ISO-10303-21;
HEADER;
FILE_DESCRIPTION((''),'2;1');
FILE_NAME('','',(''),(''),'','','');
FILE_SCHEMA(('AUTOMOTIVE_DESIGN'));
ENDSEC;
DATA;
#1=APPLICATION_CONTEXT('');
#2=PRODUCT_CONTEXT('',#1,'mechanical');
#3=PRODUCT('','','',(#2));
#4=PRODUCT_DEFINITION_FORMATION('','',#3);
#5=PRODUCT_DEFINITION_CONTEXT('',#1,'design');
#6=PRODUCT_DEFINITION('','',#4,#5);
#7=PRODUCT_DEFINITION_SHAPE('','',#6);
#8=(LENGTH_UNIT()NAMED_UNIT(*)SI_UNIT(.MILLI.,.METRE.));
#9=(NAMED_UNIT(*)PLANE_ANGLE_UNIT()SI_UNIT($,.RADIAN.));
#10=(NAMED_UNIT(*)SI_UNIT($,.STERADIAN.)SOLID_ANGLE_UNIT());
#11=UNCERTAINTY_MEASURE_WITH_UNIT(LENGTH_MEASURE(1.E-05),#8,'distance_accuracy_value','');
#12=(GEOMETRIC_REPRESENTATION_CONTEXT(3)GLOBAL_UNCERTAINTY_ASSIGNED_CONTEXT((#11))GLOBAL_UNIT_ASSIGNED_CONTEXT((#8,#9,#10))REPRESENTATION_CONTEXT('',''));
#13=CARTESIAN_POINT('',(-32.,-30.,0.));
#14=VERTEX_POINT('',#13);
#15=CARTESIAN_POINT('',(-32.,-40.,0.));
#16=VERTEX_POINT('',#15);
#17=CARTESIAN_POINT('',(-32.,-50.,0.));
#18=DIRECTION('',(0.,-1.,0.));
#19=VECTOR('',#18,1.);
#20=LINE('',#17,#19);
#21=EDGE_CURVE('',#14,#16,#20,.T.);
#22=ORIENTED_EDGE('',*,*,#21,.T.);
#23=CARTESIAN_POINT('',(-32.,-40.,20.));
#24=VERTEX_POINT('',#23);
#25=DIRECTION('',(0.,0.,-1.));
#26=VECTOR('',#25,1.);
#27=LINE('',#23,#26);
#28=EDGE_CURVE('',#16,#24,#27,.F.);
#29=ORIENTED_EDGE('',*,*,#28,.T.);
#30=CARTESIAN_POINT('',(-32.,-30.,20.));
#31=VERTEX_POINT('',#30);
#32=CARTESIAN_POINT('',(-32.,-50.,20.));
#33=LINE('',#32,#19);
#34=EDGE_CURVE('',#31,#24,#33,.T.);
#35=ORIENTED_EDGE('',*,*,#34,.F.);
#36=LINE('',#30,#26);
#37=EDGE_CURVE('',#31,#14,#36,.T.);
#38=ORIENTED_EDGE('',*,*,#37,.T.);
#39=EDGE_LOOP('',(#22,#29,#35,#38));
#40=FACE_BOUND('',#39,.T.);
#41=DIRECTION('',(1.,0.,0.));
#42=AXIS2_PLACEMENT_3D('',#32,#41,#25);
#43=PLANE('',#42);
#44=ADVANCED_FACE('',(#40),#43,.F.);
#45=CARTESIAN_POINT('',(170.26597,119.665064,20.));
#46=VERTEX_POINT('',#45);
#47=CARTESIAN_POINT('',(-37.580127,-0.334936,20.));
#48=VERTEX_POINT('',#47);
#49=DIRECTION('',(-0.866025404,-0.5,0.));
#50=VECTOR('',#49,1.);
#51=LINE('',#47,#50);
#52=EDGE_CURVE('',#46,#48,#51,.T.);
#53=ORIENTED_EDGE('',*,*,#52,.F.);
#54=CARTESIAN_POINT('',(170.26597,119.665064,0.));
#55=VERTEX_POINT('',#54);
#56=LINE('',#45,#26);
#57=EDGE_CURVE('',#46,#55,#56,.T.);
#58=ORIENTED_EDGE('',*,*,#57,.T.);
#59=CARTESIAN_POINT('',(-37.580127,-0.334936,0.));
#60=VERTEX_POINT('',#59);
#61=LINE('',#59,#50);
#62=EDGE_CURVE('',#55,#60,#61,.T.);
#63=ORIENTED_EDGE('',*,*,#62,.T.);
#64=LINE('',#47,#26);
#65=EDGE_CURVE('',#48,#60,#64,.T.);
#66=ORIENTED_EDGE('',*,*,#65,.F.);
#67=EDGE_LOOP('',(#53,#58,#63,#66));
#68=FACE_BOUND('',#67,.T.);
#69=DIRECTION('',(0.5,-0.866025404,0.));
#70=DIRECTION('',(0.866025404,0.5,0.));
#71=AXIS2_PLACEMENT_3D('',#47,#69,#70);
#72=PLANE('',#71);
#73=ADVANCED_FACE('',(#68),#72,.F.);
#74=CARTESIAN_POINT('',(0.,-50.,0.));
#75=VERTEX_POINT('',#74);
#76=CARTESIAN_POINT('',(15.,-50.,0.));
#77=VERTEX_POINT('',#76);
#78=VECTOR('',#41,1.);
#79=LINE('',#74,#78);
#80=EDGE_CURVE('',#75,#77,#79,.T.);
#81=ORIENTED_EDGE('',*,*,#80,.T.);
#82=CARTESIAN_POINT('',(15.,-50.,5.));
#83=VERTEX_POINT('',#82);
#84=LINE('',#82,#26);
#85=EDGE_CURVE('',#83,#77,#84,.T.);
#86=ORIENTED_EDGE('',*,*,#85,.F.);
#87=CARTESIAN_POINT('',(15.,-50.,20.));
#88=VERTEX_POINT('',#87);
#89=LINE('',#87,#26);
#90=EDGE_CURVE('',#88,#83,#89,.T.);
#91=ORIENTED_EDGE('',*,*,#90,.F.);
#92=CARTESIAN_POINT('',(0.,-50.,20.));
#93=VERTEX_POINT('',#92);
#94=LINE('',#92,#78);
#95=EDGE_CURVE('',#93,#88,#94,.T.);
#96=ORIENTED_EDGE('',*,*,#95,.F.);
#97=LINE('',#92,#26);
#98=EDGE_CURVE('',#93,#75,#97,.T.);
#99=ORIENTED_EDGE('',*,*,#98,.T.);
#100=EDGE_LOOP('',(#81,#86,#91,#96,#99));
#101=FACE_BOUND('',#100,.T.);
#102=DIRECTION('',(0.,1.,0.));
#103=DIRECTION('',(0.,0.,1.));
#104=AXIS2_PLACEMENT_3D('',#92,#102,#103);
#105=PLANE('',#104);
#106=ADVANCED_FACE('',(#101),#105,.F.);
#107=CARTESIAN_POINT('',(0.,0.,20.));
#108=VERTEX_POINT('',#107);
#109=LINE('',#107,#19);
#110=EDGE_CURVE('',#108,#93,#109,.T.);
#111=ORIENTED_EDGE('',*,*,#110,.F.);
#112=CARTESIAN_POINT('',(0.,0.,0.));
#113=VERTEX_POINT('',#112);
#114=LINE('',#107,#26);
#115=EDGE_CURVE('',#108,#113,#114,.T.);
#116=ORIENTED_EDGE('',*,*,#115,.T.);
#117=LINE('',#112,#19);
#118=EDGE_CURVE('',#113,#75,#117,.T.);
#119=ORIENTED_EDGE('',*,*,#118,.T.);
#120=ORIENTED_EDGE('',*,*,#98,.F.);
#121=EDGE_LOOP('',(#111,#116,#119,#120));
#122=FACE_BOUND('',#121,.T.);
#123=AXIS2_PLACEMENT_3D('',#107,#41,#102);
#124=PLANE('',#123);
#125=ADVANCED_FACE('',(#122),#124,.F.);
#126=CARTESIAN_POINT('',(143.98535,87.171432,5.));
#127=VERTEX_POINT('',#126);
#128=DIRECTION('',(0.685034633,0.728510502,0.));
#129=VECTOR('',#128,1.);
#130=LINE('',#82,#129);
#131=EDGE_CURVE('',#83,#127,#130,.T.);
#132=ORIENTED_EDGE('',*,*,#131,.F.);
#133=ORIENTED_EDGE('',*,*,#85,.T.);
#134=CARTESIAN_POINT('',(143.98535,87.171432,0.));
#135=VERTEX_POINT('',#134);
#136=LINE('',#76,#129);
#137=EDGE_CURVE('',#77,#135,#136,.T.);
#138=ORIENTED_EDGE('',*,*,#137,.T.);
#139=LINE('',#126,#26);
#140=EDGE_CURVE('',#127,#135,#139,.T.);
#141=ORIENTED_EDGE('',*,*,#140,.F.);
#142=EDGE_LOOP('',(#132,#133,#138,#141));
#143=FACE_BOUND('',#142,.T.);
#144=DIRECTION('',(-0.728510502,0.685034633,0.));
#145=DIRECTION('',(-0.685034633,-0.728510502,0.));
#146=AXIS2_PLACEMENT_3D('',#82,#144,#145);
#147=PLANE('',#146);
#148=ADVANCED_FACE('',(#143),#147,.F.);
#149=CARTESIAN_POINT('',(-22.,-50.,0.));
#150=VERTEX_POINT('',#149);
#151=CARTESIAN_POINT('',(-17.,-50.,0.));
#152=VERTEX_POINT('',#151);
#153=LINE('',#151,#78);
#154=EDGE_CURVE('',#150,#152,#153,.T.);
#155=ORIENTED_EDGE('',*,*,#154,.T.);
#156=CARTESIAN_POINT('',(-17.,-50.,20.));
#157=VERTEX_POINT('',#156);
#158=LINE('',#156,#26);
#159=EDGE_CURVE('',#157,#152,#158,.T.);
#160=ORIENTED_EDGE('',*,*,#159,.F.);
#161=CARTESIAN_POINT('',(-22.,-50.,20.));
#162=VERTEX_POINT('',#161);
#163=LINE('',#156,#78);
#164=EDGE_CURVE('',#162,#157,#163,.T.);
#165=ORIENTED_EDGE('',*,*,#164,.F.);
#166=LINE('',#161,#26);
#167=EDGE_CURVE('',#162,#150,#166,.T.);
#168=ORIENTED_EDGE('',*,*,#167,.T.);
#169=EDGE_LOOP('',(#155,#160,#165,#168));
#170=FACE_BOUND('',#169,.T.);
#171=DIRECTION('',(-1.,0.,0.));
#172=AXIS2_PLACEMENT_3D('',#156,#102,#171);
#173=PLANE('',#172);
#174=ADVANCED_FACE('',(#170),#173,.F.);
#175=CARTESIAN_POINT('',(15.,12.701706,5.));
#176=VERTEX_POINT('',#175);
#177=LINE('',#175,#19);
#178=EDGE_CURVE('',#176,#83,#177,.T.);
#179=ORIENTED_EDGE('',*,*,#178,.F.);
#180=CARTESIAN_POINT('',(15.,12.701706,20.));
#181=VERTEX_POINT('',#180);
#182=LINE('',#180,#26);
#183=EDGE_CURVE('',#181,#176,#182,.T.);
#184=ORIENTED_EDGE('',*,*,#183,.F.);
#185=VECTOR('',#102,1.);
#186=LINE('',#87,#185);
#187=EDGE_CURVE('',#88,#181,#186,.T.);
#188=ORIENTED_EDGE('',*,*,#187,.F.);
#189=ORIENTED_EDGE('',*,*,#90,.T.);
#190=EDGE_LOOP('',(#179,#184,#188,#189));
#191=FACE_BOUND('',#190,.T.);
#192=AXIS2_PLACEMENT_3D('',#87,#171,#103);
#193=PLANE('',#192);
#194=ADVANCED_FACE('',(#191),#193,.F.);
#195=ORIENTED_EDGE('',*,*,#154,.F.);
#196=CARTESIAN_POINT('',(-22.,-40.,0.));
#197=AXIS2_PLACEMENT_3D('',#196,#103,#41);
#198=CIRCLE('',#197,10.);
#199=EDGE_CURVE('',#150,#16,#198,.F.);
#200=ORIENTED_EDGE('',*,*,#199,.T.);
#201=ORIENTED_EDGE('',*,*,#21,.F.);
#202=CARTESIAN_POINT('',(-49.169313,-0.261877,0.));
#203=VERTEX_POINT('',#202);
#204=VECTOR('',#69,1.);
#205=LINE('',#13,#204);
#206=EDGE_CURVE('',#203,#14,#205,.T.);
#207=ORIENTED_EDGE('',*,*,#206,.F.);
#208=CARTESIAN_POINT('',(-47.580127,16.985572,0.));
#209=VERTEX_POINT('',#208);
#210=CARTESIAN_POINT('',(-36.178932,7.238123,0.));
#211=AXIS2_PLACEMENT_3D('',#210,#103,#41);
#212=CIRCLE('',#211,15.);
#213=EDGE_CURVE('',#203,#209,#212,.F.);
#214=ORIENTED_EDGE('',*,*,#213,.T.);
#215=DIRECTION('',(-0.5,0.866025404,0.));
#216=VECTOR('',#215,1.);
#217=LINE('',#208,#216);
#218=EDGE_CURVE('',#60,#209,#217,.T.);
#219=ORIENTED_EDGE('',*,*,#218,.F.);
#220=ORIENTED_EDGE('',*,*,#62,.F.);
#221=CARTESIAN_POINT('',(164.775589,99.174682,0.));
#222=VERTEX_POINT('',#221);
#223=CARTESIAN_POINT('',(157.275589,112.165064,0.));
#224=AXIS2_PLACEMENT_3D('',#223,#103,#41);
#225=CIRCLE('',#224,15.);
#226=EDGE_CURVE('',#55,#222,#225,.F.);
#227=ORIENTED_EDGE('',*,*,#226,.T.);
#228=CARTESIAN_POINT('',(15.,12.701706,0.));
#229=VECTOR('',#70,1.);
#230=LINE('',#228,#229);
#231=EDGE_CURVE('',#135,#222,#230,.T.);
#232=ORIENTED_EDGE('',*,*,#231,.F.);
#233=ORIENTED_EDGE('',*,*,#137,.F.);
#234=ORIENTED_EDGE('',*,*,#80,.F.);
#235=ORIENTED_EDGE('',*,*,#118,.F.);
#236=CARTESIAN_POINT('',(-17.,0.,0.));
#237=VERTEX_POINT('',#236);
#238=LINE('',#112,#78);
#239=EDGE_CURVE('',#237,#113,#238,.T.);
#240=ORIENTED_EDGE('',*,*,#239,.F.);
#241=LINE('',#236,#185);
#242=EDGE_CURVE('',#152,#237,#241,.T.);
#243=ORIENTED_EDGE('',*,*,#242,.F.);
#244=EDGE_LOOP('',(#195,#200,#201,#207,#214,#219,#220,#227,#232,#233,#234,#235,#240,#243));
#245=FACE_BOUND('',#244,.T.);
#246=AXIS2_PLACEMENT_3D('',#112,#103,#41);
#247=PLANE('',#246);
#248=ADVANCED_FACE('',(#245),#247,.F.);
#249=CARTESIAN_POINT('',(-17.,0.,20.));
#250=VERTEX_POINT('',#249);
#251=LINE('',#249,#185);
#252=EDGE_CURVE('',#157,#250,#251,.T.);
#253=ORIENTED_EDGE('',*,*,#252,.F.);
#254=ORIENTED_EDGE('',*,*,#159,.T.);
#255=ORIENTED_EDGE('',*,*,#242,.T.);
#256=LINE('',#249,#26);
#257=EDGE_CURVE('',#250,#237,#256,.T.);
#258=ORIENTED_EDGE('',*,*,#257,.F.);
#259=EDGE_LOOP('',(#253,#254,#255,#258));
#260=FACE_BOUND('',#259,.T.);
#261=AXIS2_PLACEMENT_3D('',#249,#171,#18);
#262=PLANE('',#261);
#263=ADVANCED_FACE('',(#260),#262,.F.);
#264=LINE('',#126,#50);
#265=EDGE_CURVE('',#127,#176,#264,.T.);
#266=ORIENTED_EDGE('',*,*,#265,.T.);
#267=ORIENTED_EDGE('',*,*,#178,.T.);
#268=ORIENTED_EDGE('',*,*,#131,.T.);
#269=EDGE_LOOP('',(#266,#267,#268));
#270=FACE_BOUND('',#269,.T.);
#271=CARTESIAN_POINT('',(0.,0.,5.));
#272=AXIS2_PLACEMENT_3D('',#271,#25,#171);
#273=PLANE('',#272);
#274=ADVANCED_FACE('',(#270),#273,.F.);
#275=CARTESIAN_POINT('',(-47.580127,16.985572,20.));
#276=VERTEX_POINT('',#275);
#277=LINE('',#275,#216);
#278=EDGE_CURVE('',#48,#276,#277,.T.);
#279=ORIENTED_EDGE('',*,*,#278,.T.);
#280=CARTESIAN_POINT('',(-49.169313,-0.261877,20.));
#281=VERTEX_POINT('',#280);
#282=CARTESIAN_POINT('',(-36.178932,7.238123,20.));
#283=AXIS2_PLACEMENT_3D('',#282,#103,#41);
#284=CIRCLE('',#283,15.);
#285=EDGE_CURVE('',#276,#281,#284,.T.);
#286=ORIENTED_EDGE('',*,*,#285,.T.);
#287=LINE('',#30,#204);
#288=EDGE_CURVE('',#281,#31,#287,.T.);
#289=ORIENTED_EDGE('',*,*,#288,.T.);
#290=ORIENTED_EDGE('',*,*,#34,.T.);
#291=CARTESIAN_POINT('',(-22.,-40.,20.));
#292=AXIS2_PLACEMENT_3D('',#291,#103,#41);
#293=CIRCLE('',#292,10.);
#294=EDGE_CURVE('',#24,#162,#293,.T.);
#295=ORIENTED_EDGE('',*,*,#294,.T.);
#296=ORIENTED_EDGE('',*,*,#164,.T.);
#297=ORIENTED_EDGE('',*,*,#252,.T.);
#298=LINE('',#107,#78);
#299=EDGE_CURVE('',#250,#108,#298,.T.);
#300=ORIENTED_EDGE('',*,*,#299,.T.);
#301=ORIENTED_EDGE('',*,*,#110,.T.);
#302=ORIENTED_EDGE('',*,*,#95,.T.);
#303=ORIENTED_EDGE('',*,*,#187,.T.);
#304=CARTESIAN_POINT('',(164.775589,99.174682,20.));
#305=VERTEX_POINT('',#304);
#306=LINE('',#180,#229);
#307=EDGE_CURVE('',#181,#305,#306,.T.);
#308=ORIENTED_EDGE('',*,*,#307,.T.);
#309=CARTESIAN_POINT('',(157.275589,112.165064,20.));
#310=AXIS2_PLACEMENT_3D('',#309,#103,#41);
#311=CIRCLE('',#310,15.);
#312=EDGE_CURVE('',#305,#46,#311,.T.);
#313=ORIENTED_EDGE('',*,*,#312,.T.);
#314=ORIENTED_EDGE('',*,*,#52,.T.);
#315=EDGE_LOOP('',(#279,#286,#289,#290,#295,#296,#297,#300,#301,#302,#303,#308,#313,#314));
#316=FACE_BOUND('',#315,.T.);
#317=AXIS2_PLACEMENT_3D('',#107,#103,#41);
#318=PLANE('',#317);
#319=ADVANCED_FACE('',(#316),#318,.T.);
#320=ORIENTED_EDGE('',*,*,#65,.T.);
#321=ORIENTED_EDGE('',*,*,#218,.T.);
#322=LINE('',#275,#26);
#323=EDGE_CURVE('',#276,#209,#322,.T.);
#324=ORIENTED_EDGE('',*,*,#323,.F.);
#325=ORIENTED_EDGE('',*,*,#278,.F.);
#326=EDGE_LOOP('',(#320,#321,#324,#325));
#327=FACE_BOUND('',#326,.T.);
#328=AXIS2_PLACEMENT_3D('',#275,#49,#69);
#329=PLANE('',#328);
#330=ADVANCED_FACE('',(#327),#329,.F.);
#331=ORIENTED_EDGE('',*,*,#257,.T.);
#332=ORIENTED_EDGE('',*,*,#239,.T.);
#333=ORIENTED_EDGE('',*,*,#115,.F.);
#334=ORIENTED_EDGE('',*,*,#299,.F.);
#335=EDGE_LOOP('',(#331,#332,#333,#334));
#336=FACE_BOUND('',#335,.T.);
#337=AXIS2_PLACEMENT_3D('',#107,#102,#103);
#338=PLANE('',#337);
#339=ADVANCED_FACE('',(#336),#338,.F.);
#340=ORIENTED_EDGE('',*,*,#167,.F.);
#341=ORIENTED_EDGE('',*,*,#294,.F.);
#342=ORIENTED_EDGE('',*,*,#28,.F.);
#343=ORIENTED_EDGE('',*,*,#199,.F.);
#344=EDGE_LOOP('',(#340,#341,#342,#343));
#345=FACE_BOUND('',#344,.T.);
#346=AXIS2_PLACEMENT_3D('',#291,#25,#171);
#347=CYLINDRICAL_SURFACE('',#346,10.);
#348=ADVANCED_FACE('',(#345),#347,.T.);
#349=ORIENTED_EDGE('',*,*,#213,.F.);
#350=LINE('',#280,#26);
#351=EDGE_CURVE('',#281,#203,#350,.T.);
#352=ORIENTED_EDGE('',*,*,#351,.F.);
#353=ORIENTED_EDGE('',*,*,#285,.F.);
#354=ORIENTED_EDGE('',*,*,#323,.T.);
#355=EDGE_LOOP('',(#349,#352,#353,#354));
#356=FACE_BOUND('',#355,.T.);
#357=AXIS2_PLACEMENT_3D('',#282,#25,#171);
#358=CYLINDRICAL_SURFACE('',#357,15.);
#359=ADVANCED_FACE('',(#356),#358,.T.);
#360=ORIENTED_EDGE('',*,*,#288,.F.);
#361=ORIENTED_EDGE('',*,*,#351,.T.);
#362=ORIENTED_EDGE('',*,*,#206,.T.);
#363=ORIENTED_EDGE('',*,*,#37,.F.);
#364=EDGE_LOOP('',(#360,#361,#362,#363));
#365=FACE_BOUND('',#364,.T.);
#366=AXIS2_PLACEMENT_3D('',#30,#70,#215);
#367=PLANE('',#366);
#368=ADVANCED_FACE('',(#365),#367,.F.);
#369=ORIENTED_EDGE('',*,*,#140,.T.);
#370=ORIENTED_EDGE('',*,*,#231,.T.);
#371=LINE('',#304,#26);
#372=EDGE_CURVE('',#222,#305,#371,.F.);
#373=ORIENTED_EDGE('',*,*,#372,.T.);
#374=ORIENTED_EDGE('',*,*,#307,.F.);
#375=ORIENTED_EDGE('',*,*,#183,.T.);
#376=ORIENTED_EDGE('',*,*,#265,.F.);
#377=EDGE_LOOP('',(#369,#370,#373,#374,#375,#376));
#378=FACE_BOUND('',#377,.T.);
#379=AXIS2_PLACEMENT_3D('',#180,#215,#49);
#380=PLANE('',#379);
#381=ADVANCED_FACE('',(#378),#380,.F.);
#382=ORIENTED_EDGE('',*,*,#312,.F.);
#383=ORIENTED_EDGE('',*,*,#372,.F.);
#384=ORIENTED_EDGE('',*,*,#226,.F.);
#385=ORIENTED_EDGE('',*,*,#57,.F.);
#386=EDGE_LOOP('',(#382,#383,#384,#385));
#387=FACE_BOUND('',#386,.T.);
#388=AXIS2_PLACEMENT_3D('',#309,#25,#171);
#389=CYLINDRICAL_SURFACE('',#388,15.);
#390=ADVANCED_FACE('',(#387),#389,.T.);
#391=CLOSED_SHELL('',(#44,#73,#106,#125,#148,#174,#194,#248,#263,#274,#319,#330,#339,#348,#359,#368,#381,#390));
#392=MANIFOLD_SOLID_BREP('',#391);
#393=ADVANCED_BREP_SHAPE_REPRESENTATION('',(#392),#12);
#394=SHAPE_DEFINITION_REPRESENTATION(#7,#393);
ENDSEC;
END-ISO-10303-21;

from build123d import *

# Parameters (mm, degrees)
BOSS_EXTRUDE1_DEPTH = 20
BOSS_EXTRUDE2_DEPTH = 5
FILLET1_R           = 15
FILLET2_R           = 10
FILLET3_R           = 15


# Some blends are built 0.0001 mm under size
with BuildPart() as part:
    # Sketch1 → Boss-Extrude1 (new body)
    with BuildSketch(Plane.XY):
        Polygon((0, 0), (0, -50), (15, -50), (15, 12.701705922), (177.765969889, 106.674682453), (170.265969889, 119.665063509), (-37.580127019, -0.334936491), (-47.580127019, 16.985571585), (-56.240381057, 11.985571585), (-32, -30), (-32, -50), (-17, -50), (-17, 0), align=None)
    extrude(amount=BOSS_EXTRUDE1_DEPTH)

    # Sketch2 → Boss-Extrude2 (add)
    with BuildSketch(Plane.XY):
        Polygon((15, -50), (143.985349671, 87.171432276), (15, 12.701705922), align=None)
    extrude(amount=BOSS_EXTRUDE2_DEPTH)

    # Fillet1
    # the kernel refuses this fillet: 15 mm, written as the material it takes off along each edge
    with BuildSketch(Plane(origin=(-56.240381057, 11.985571585, -35.355339059), x_dir=(0.866025403784439, 0.4999999999999994, 0), z_dir=(0, 0, 1))) as fillet1_piece_1:
        with BuildLine():
            CenterArc((15, -14.142135624), FILLET1_R, 109.471220634, 70.528779366)
            Line((0, -14.142135624), (-0.3, -14.142135624))
            Line((-0.3, -14.142135624), (-0.3, 0))
            Line((-0.3, 0), (0, 0.3))
            ThreePointArc((0, 0.3), (5, 0.3), (9.9, 0.282842712))
            Line((9.9, 0.282842712), (10, 0))
        make_face()
    extrude(amount=90.710678119, mode=Mode.SUBTRACT)

    # Fillet2
    fillet2_edges = [part.edges().sort_by_distance(p)[0] for p in [
        (-32, -50, 10),
    ]]
    fillet(fillet2_edges, radius=FILLET2_R)

    # Fillet3
    fillet3_edges = [part.edges().sort_by_distance(p)[0] for p in [
        (177.765969889, 106.674682453, 10),
    ]]
    fillet(fillet3_edges, radius=FILLET3_R - 0.0001)  # a hair under: the kernel refuses the full size


solid = part.part
